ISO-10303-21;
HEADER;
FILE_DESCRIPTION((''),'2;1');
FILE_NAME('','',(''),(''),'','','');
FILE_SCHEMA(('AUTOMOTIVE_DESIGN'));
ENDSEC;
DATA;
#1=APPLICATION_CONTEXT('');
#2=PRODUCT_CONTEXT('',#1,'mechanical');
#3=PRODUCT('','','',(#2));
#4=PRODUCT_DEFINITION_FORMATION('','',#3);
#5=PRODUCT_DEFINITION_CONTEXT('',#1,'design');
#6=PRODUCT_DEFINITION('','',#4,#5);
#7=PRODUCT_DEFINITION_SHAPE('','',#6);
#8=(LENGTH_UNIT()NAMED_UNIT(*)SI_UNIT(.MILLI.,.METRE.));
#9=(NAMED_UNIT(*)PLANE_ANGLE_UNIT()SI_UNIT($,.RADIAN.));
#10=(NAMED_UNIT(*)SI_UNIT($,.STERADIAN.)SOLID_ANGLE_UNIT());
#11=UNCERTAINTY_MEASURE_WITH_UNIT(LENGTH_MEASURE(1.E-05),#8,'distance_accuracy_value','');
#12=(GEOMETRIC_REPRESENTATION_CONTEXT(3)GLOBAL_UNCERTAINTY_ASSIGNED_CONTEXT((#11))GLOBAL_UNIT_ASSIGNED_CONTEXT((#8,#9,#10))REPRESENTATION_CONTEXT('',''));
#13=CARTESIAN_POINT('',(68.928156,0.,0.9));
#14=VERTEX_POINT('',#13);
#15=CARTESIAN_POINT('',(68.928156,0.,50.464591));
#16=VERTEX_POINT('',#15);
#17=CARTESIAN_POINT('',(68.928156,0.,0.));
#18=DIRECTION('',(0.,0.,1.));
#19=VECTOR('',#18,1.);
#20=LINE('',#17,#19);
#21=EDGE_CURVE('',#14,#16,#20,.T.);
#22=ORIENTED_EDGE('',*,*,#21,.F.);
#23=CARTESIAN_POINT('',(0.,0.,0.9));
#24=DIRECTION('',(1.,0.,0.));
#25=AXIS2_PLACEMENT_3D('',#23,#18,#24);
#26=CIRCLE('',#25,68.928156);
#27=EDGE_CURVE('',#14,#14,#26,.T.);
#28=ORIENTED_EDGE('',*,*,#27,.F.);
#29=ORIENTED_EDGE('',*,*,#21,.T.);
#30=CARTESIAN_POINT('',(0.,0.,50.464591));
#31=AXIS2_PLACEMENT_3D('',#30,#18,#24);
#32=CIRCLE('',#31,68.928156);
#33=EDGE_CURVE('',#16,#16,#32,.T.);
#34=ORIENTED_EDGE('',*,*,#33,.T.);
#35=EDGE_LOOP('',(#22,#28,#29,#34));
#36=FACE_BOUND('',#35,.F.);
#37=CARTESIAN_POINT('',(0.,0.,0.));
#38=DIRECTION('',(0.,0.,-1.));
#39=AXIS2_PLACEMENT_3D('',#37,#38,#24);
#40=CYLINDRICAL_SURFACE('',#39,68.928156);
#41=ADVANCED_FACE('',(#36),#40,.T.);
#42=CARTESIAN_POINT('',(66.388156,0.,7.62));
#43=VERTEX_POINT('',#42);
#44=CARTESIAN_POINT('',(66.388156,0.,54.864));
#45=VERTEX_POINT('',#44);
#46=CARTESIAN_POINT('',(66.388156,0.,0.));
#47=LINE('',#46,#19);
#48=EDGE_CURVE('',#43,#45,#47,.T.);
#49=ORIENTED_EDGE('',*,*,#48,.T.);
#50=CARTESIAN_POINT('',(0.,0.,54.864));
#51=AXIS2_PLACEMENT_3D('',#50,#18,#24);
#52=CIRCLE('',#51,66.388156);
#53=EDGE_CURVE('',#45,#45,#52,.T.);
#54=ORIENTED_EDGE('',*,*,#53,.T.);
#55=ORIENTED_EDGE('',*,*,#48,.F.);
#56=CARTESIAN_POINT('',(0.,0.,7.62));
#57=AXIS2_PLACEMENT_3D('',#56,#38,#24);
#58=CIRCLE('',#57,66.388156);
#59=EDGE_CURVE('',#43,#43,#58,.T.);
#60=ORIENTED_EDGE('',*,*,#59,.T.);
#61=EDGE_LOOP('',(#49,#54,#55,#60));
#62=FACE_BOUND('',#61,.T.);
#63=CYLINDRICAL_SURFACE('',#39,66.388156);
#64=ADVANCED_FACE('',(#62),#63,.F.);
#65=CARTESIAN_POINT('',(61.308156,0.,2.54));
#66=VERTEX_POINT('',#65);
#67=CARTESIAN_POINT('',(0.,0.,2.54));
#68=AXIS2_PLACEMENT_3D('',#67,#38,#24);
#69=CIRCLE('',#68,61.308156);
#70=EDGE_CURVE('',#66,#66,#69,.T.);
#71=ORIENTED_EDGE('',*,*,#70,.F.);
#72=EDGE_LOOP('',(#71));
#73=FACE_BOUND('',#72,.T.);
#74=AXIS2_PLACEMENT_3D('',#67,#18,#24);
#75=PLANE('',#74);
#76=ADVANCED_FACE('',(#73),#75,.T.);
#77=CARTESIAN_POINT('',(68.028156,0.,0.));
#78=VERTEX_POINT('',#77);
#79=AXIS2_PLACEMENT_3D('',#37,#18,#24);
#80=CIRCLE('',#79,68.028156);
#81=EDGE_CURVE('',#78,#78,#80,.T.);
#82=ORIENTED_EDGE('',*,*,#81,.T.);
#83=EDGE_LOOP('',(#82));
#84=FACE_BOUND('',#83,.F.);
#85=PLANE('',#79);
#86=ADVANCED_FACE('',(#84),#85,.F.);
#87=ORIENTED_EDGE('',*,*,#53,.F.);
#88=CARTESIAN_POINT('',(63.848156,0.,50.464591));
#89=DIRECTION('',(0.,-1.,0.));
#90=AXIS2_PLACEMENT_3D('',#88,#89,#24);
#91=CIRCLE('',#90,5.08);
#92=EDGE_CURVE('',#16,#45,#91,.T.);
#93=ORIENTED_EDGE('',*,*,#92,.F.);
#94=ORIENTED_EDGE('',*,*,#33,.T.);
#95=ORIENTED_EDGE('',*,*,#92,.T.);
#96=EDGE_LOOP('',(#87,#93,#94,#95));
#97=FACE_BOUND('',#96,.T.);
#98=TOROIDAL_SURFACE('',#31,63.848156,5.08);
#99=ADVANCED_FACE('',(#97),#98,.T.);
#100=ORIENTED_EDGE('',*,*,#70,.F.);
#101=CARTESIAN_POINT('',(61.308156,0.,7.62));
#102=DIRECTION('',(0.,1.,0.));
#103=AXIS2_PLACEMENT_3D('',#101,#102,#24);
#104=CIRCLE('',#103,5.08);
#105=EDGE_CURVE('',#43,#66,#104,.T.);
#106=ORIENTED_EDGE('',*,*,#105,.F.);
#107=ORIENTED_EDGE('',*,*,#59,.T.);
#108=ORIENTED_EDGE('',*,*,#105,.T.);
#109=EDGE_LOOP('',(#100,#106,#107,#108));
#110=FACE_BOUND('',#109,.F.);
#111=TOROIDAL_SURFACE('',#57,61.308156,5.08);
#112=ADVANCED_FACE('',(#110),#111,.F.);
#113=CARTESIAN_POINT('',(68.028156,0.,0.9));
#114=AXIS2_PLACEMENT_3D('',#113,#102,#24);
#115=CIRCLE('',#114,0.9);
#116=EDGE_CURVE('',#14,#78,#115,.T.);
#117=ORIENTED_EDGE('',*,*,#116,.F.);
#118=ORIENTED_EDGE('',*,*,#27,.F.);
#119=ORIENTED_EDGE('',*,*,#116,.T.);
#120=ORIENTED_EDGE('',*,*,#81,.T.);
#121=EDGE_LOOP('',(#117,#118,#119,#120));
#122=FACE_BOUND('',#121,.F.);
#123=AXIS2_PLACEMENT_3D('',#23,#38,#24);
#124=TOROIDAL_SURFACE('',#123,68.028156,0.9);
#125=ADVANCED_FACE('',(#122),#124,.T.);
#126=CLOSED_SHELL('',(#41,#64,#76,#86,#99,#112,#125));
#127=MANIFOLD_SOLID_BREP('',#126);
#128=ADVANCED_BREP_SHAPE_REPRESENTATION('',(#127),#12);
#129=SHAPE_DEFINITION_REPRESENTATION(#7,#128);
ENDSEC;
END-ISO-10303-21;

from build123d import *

# Parameters (mm, degrees)
F0_R     = 68.9281560168
F1_DEPTH = 54.864
F2_T     = -2.54
F4_R     = 0.9
F5_R     = 5.08


# Not quite as in the source:
# - a fillet or chamfer that OpenCascade refuses, or shapes differently, is made with other operations: its cross-section is extruded or revolved along the edge and cut away or added


with BuildPart() as f1:
    # F0 (on Top) → F1 (new body)
    with BuildSketch(Plane.XY):
        Circle(F0_R)
    extrude(amount=F1_DEPTH)

    # F2
    f2_openings = [f1.faces().sort_by_distance(p)[0] for p in [
        (0, 0, 54.864),
    ]]
    offset(amount=F2_T, openings=f2_openings)

    # F3: fillet of radius 5.08 on 1 edges, made by hand

    # F3_s1 → F3_t2 (revolve, cut)
    with BuildSketch(Plane.XZ):
        with BuildLine():
            ThreePointArc((68.9281560168, 50.4645909488), (68.247565068, 53.0045909488), (66.3881560168, 54.864))
            Line((66.3881560168, 54.864), (68.9281560168, 54.864))
            Line((68.9281560168, 54.864), (68.9281560168, 50.4645909488))
        make_face()
    revolve(axis=Axis((0, 0, 54.864), (0, 0, 1)), mode=Mode.SUBTRACT)

    # F4
    f4_edges = [f1.edges().sort_by_distance(p)[0] for p in [
        (-68.928156, 0, 0),
    ]]
    fillet(f4_edges, radius=F4_R)

    # F5
    f5_edges = [f1.edges().sort_by_distance(p)[0] for p in [
        (-66.388156, 0, 2.54),
    ]]
    fillet(f5_edges, radius=F5_R)


solid = f1.part
